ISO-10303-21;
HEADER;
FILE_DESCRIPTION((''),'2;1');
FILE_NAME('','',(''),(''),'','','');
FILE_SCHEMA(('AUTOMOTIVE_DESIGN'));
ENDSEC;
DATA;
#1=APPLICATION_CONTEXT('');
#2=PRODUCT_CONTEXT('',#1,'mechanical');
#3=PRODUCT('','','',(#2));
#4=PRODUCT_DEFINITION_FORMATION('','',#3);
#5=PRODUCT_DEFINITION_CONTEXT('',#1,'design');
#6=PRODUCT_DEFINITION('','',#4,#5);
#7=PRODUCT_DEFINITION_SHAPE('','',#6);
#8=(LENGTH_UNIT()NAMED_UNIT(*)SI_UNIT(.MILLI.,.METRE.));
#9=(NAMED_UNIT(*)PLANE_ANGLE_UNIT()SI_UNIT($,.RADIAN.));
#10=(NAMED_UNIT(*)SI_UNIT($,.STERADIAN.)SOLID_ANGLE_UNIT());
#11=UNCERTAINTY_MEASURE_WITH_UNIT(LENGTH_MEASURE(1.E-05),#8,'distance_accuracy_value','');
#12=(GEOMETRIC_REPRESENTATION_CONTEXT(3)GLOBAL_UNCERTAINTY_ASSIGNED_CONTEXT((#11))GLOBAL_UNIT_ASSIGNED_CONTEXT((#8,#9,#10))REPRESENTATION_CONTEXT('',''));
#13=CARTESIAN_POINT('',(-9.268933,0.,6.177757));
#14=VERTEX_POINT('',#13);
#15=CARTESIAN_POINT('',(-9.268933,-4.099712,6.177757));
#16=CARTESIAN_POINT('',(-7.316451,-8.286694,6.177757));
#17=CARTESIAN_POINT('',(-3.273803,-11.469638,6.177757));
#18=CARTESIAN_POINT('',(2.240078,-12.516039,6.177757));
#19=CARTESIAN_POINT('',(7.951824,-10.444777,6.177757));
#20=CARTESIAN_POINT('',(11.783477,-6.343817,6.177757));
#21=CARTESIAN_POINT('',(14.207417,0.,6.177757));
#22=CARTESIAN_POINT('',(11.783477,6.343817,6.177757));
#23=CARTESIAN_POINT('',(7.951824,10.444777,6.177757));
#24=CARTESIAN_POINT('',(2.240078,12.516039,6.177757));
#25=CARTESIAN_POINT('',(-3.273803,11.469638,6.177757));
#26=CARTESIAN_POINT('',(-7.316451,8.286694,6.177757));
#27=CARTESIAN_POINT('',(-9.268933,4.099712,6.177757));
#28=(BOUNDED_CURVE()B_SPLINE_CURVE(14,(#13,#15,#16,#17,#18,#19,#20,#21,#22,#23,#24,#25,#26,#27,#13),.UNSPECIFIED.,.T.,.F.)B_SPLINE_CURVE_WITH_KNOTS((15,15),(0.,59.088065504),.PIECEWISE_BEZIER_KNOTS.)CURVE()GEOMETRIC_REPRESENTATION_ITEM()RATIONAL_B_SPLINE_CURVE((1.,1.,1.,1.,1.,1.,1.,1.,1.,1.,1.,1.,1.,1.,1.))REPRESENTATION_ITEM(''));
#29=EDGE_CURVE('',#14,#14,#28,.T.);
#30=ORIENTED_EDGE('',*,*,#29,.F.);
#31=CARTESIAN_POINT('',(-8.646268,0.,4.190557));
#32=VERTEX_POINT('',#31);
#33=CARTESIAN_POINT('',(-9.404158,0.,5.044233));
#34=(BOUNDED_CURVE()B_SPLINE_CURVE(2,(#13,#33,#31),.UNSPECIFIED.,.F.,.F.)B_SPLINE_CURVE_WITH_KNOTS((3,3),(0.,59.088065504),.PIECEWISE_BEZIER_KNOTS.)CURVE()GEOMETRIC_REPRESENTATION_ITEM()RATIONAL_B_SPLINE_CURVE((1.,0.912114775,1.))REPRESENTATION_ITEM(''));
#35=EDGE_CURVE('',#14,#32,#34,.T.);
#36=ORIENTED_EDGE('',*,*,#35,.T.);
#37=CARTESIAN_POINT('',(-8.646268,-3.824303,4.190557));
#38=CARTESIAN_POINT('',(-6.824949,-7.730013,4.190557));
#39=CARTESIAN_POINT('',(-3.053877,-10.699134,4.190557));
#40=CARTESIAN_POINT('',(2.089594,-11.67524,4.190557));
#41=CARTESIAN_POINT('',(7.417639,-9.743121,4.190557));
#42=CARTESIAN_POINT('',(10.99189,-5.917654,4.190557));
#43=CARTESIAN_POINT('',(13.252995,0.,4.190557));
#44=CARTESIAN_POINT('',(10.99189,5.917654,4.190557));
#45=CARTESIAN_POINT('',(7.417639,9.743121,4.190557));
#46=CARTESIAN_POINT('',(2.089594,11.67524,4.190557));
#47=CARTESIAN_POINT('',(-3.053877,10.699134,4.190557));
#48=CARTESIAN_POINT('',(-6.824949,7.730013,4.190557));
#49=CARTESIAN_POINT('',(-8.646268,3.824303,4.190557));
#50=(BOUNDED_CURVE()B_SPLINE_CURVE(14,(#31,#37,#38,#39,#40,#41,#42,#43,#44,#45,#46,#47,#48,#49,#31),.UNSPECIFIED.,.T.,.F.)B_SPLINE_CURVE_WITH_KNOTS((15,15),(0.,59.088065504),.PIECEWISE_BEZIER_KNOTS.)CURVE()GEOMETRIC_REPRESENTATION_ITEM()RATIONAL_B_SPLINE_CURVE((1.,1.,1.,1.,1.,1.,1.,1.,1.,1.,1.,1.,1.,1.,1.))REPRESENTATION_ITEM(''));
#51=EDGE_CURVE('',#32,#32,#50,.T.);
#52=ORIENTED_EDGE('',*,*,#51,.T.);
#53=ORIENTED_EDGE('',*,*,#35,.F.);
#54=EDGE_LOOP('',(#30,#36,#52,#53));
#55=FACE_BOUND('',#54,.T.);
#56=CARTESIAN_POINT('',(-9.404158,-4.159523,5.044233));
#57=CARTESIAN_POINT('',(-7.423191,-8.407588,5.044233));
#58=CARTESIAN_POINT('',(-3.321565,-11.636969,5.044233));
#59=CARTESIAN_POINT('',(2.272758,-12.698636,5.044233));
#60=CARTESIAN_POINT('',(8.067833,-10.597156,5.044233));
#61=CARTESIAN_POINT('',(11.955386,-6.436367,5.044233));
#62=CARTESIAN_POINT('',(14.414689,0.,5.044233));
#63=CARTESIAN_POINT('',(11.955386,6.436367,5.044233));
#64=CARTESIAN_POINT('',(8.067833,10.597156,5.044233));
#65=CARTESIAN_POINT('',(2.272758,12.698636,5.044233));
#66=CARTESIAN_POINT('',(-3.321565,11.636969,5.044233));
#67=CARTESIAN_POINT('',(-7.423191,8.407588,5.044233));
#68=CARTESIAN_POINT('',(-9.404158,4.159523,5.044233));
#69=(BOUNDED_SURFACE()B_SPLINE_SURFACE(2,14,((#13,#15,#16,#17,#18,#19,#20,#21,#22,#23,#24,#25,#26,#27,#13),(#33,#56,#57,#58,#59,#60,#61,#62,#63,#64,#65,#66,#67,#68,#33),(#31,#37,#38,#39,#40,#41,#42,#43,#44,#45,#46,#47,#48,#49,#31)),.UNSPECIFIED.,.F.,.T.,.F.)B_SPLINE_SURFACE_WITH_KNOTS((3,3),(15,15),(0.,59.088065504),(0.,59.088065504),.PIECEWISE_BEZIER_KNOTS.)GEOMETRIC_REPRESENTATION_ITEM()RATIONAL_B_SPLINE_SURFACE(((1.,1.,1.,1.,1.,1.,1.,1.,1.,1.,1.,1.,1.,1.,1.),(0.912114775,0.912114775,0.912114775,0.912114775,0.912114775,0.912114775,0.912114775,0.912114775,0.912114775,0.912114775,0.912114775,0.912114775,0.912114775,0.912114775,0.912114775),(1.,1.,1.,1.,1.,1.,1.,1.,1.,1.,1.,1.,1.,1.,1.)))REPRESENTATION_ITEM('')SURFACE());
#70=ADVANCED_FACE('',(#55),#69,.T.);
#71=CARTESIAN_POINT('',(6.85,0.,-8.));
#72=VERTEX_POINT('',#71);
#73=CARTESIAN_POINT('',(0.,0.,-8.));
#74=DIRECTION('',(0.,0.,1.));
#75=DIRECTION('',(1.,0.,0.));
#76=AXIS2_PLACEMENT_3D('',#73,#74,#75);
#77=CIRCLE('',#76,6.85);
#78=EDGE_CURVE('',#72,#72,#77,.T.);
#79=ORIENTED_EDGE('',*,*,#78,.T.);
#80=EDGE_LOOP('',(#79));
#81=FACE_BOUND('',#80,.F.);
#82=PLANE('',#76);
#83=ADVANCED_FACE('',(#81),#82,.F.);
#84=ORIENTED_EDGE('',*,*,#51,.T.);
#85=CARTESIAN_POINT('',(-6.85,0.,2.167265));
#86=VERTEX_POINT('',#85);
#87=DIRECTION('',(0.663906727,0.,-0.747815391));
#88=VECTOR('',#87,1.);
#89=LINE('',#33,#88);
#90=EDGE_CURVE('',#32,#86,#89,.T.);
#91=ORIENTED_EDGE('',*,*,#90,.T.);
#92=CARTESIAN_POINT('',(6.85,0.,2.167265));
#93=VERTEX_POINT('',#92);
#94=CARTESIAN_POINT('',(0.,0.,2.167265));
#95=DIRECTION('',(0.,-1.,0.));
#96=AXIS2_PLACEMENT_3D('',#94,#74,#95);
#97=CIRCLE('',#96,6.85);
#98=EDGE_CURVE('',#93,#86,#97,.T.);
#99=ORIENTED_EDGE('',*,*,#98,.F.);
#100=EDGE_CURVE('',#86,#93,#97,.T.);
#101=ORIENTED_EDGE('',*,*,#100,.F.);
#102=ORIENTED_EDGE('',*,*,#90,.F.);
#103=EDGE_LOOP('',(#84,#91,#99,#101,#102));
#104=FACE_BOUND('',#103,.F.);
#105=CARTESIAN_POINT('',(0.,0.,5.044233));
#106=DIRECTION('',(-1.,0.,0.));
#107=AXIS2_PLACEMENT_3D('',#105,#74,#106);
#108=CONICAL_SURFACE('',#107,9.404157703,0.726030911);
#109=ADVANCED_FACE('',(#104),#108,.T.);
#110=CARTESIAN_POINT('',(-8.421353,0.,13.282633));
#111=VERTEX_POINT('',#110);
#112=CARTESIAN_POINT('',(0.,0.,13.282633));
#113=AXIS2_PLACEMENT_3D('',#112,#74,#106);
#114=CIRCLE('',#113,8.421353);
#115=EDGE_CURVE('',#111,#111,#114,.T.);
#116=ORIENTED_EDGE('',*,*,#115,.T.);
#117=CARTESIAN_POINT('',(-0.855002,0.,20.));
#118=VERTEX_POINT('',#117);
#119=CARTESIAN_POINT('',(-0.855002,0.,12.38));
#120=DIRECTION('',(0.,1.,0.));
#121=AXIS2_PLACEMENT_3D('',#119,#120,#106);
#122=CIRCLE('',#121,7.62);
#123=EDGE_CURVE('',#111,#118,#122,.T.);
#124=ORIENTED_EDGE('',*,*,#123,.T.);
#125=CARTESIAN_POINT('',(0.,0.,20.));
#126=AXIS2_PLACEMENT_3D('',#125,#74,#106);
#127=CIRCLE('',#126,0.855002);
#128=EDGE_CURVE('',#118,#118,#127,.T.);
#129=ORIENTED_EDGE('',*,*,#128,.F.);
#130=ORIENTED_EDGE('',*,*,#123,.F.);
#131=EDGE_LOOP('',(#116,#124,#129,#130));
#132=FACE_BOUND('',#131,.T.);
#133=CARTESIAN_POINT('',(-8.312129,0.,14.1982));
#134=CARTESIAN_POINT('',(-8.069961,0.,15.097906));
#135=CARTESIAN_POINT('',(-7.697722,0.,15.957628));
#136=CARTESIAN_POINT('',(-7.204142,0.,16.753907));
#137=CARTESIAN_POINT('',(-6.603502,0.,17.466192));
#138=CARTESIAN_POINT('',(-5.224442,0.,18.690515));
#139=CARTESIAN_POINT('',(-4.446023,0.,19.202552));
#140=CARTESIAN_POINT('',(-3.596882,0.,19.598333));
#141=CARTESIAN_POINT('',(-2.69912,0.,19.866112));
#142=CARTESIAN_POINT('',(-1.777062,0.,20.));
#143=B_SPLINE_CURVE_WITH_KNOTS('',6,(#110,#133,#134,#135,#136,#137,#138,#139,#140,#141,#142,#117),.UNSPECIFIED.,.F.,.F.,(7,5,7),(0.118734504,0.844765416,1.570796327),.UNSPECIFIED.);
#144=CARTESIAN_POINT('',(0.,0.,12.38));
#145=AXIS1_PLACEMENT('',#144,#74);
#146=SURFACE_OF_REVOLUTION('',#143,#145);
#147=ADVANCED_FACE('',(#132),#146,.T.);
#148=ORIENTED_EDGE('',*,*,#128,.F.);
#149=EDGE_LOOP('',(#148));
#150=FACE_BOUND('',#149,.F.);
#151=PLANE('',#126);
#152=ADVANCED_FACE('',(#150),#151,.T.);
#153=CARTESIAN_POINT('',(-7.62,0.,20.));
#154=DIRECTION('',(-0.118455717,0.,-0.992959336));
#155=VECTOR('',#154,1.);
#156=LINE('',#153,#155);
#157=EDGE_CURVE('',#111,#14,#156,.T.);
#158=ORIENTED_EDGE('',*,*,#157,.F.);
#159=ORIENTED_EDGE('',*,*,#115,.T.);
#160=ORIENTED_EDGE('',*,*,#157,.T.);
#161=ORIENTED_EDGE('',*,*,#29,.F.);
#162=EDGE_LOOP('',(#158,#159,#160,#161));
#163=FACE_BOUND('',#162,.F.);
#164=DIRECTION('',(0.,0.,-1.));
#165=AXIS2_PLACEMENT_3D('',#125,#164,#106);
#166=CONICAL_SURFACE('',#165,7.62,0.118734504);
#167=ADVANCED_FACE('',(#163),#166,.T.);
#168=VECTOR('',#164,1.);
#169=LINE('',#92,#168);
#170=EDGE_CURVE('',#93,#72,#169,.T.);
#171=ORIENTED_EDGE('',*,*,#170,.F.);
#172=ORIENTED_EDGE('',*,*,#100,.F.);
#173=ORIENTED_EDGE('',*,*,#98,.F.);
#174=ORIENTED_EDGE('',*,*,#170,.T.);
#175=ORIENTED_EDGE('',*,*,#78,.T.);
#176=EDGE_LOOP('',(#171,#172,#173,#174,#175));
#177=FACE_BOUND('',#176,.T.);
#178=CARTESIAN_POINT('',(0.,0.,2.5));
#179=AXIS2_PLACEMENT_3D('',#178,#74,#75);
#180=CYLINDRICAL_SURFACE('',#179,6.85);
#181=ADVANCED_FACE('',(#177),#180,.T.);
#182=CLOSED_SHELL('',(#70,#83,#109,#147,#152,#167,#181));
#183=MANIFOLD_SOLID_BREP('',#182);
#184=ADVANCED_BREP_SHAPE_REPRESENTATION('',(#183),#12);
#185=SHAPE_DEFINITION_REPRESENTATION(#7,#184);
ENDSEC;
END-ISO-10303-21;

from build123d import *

# Parameters (mm, degrees)
F0_R        = 6.85
F1_DEPTH    = 8
F4_R        = 7.62
F5_S5_R     = 6.85
F5_T6_DEPTH = 16
F6_R        = 2.54


# Not quite as in the source:
# - a fillet or chamfer that OpenCascade refuses, or shapes differently, is made with other operations: its cross-section is extruded or revolved along the edge and cut away or added


with BuildPart() as f1:
    # F0 (on Top) → F1 (new body)
    with BuildSketch(Plane.XY):
        Circle(F0_R)
    extrude(amount=-F1_DEPTH)

    # F2 (on Front) → F3 (revolve)
    with BuildSketch(Plane.XZ):
        Polygon((-10.0059127435, 0), (0, 0), (0, 20), (-7.62, 20), align=None)
    revolve(axis=Axis((0, 0, 10), (0, 0, 1)))

    # F4
    f4_edges = [f1.edges().sort_by_distance(p)[0] for p in [
        (7.62, 0, 20),
    ]]
    fillet(f4_edges, radius=F4_R)

    # F5: chamfer of 5.08 on 1 edges, made by hand


with BuildPart() as f5_tool2:
    # F5_s3 → F5_t4 (revolve)
    with BuildSketch(Plane.XZ):
        Polygon((-9.4041577027, 5.0442334275), (-4.9259127435, 0), (-10.0059127435, 0), align=None)
    revolve(axis=Axis((0, 0, 0), (0, 0, 1)))

    # F5_s5 → F5_t6 (cut, symmetric)
    with BuildSketch(Plane.XY.offset(2.5)):
        Circle(F5_S5_R)
    extrude(amount=F5_T6_DEPTH, both=True, mode=Mode.SUBTRACT)


with BuildPart() as f1_1:
    add(f1.part)

    # F5_t1: cut F5_tool2
    add(f5_tool2.part, mode=Mode.SUBTRACT)

    # F6
    f6_edges = [f1_1.edges().sort_by_distance(p)[0] for p in [
        (9.404158, 0, 5.044233),
    ]]
    fillet(f6_edges, radius=F6_R)


solid = f1_1.part
